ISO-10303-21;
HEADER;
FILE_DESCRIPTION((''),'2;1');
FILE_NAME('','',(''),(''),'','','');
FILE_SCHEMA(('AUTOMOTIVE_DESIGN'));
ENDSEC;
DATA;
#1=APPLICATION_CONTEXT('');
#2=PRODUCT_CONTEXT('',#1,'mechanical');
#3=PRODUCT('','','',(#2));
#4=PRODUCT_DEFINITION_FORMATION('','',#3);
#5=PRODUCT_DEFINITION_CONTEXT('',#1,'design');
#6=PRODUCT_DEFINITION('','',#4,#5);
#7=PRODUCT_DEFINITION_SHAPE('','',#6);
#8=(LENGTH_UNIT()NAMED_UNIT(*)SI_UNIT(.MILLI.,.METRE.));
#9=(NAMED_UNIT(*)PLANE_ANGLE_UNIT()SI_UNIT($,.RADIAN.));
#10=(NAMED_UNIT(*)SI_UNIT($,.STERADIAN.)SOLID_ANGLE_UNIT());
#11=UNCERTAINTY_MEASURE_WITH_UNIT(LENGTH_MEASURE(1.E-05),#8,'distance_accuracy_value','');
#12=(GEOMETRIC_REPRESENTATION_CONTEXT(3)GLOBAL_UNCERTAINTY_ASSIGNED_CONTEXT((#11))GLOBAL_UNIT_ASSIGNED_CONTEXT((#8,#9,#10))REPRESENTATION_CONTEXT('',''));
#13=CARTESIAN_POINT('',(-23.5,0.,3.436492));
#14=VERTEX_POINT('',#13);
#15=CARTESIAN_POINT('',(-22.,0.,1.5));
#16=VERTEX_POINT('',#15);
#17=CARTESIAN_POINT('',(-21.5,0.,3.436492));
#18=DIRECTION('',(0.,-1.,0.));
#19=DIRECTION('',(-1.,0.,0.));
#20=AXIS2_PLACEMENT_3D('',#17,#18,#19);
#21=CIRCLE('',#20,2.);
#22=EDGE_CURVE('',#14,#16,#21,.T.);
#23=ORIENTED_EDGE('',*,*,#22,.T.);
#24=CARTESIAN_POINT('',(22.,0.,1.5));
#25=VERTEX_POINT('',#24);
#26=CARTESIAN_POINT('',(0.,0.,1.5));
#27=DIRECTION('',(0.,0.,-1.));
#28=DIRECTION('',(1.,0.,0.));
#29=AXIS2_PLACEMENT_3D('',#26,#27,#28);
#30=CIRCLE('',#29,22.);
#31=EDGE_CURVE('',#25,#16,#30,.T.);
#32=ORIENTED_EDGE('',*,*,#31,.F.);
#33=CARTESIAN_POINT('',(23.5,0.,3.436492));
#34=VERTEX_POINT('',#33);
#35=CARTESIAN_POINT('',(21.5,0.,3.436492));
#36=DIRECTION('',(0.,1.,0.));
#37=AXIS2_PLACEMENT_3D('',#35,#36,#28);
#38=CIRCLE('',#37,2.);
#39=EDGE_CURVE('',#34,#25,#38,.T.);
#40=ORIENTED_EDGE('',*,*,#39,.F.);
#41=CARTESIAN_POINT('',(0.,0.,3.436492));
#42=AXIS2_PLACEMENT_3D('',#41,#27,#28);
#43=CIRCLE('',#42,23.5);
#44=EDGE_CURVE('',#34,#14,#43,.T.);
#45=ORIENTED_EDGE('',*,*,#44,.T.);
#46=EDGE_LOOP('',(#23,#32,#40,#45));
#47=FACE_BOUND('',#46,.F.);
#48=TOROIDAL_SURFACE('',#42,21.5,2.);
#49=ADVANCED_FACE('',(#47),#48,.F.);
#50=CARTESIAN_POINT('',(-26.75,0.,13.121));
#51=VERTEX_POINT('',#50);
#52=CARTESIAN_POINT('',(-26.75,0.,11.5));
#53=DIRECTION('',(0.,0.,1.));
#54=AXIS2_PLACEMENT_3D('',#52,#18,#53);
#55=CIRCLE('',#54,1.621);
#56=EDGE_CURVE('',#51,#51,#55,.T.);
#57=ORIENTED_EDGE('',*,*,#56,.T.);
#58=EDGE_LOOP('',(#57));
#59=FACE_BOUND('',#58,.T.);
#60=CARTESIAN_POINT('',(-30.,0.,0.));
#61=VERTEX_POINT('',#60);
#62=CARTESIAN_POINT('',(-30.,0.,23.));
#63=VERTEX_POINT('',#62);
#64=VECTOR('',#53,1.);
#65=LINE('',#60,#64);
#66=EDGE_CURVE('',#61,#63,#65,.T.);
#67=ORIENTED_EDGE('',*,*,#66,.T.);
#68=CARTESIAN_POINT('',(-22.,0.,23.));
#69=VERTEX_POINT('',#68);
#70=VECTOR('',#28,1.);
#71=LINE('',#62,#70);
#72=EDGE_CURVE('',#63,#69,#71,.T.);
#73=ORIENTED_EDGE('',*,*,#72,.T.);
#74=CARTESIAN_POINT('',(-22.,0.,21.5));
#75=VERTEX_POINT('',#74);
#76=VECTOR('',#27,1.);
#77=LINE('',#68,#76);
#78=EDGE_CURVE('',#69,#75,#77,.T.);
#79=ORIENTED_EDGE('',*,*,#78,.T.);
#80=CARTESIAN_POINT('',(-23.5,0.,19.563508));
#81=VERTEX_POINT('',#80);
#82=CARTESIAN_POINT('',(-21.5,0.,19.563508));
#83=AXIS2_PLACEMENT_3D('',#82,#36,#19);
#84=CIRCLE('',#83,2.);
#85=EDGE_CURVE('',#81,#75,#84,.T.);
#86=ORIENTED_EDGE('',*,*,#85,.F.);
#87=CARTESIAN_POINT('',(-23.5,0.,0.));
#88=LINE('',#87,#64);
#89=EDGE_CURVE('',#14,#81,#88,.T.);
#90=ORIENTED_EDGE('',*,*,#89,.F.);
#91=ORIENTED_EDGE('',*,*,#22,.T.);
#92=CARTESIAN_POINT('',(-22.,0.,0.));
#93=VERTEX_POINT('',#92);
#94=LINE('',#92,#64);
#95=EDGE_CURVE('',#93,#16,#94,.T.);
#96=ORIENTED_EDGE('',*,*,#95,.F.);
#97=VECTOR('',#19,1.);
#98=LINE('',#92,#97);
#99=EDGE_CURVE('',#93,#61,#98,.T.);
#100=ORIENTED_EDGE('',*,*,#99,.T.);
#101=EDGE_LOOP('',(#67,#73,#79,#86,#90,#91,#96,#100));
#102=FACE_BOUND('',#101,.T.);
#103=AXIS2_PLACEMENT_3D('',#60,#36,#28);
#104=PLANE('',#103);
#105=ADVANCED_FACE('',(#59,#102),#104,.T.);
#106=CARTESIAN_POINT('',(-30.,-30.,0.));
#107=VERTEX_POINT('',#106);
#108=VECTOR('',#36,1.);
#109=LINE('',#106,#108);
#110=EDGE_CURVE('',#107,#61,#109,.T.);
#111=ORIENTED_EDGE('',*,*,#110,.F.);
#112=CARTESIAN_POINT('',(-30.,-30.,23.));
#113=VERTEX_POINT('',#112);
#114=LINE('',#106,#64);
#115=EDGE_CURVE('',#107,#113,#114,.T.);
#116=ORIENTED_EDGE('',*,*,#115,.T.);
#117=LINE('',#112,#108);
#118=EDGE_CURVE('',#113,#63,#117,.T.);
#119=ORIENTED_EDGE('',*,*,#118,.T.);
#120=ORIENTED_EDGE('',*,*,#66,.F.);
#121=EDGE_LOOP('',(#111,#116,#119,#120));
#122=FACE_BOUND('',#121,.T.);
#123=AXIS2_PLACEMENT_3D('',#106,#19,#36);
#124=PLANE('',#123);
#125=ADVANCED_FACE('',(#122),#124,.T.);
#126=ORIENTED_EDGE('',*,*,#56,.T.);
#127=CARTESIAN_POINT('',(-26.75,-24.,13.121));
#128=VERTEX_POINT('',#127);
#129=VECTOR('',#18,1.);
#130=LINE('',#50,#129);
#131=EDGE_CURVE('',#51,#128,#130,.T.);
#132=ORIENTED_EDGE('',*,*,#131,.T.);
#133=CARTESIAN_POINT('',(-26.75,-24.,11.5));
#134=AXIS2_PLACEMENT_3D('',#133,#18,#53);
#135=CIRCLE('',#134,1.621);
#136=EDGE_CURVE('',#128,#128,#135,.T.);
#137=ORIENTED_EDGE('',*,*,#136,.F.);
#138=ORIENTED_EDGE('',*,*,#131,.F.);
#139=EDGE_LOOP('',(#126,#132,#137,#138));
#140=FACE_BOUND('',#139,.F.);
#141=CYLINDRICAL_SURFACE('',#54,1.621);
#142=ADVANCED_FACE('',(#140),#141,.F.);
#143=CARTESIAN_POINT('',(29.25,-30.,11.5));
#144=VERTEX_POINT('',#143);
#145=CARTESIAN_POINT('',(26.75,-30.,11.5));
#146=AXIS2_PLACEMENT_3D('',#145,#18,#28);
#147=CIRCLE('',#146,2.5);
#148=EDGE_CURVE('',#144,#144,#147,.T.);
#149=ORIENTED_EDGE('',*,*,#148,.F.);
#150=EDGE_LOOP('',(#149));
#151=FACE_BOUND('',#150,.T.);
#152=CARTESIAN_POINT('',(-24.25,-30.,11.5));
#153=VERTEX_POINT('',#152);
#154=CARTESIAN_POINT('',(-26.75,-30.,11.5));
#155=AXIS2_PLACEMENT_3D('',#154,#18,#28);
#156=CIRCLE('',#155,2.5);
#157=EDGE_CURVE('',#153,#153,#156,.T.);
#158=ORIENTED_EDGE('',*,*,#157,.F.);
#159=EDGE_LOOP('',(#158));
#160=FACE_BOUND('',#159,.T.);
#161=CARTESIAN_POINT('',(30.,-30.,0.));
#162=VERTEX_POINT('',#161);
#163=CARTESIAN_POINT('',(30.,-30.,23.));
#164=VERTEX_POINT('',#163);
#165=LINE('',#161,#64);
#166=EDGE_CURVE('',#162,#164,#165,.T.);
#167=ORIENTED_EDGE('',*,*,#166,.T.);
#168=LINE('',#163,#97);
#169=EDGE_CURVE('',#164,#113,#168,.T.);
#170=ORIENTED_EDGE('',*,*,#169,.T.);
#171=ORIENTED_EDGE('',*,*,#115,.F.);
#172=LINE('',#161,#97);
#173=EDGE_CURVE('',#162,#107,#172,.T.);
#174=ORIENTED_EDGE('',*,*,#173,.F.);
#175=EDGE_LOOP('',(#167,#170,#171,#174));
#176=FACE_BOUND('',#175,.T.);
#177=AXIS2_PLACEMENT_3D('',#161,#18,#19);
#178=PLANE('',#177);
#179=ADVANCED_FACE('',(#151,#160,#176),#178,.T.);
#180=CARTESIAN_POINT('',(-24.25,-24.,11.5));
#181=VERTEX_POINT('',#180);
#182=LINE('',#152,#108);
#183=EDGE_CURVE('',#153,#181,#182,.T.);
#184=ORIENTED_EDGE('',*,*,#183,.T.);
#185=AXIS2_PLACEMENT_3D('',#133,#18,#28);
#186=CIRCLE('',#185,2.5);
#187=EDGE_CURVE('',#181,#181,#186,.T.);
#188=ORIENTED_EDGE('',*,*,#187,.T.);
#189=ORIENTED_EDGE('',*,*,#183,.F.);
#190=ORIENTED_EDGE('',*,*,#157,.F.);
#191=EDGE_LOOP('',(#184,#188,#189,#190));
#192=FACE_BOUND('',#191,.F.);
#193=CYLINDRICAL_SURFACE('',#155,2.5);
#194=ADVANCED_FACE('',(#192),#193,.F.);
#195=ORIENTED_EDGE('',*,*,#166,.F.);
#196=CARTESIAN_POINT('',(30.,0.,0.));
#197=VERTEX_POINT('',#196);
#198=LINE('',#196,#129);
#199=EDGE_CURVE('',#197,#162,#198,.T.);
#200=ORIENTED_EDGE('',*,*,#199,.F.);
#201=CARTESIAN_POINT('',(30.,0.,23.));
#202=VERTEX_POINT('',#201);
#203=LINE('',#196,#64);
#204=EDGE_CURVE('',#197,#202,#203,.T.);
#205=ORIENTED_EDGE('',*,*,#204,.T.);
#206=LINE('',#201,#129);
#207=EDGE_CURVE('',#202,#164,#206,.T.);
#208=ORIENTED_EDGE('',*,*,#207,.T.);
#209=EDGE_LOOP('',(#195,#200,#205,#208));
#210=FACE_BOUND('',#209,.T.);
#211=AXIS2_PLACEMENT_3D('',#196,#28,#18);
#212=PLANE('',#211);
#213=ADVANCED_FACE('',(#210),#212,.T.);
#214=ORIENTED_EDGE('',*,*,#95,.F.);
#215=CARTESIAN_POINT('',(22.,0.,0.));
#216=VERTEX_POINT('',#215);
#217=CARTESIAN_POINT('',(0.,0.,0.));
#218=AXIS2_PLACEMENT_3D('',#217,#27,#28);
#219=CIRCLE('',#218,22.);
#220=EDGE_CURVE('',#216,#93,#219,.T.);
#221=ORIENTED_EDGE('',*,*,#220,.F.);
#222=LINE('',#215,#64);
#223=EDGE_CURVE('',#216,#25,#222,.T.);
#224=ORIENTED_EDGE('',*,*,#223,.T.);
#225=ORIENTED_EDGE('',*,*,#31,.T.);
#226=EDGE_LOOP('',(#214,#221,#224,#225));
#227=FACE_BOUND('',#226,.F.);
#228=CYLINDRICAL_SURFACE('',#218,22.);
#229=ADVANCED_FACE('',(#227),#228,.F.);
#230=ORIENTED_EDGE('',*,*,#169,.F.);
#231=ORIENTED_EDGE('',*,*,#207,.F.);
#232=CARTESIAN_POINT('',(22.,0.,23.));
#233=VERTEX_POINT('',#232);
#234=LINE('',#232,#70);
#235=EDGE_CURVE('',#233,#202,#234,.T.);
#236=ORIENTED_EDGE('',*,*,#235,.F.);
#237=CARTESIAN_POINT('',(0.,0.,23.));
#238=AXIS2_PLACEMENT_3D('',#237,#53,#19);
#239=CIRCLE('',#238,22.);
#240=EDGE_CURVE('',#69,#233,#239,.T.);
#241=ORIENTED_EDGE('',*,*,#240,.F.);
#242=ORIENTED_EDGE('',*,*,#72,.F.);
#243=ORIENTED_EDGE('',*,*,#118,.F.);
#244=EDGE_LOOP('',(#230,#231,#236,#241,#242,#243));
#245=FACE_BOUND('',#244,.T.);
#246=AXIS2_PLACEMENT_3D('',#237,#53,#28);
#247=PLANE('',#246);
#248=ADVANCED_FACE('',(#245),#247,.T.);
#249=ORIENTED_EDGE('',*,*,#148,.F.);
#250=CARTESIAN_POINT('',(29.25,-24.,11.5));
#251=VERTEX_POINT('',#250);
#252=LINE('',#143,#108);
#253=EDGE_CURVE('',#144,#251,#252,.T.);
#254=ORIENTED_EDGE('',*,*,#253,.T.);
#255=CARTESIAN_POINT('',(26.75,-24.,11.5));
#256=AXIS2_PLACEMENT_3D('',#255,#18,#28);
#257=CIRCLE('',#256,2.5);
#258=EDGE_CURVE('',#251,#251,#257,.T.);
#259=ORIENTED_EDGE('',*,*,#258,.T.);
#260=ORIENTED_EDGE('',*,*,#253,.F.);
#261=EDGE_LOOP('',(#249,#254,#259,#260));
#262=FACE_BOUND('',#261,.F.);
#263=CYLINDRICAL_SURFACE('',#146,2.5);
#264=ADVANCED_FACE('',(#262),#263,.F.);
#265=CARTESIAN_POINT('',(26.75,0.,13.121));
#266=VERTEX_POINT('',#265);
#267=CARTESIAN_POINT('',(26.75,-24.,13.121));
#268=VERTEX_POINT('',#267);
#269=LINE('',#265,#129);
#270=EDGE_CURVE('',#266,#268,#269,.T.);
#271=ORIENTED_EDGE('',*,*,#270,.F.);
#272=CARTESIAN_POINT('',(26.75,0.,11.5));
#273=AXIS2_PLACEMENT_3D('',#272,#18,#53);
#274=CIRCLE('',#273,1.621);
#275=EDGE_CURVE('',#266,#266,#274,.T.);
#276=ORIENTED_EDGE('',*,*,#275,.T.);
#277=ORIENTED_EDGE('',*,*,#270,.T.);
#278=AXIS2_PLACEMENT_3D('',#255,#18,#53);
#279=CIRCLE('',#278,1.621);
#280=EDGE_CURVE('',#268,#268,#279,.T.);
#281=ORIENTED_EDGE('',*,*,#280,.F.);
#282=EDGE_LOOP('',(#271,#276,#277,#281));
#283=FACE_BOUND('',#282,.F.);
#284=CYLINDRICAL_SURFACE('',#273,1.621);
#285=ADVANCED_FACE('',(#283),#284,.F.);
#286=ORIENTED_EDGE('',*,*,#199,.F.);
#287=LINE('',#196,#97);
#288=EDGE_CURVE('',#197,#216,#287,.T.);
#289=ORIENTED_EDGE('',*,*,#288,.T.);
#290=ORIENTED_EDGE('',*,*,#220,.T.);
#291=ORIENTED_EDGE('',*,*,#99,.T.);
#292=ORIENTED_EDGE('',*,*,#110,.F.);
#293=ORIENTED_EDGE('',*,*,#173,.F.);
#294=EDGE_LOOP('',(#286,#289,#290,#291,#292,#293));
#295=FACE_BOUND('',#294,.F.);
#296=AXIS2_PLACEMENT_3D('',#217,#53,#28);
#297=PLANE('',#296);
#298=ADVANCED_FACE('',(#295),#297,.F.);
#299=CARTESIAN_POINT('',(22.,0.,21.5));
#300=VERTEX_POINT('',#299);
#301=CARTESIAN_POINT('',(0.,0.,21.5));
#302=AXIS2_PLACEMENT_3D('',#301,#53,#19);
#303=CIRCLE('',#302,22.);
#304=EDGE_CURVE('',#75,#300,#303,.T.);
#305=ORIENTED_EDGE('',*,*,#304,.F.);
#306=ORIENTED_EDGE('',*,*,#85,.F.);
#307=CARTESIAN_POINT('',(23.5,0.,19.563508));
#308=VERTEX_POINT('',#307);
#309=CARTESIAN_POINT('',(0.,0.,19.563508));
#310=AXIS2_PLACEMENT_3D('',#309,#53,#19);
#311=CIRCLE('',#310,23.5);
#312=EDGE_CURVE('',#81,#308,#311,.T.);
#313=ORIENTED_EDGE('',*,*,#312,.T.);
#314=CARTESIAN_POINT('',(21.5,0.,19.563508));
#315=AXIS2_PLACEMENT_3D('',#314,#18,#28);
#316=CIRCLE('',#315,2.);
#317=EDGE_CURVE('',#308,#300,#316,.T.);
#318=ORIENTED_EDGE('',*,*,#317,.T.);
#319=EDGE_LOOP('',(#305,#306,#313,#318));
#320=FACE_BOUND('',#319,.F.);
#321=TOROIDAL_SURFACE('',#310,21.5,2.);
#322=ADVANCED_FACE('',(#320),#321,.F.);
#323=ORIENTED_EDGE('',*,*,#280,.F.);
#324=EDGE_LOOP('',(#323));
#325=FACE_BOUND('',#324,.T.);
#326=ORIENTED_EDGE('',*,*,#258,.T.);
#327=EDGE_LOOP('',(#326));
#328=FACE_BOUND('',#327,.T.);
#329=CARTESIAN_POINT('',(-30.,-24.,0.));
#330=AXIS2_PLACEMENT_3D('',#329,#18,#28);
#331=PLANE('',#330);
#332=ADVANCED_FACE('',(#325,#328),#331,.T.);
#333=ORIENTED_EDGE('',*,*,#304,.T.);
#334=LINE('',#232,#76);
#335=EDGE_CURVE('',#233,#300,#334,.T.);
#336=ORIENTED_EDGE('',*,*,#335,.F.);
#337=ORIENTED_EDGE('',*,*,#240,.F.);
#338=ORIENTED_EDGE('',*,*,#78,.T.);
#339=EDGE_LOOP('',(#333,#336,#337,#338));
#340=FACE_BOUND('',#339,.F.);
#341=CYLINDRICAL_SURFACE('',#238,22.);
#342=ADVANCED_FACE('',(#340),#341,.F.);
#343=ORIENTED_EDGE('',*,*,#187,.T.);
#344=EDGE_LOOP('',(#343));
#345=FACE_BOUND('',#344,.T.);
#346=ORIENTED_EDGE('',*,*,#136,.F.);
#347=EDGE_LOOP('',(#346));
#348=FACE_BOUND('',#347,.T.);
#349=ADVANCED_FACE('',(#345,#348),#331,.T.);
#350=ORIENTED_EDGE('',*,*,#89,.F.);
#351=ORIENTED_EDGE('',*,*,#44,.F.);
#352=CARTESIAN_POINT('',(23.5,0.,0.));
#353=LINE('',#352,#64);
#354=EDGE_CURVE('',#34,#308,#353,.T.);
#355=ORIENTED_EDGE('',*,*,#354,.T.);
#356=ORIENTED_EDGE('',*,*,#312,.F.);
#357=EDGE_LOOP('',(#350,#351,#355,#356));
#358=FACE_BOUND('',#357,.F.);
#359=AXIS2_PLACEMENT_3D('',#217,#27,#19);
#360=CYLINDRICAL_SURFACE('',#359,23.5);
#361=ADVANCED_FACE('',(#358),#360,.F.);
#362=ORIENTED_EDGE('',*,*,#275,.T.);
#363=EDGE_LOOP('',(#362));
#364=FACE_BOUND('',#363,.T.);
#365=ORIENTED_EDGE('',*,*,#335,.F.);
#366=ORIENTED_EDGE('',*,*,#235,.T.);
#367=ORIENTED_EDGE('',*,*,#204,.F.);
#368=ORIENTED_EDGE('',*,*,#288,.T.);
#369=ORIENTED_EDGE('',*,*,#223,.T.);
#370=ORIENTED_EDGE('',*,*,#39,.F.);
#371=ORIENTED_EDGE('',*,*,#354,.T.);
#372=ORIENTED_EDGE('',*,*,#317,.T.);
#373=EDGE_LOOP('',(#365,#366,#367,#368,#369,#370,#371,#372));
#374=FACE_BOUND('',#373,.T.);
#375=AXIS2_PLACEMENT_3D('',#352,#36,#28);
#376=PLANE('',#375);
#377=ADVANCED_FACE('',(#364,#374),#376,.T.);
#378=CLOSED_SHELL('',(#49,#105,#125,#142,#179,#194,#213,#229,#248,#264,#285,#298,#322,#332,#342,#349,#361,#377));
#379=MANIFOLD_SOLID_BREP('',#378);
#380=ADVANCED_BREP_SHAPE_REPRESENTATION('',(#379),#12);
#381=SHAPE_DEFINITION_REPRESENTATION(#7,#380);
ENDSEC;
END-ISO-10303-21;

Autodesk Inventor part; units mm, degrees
ref_plane "YZ Plane" through (0, 0, 0) normal (1, 0, 0) x (0, 1, 0)
ref_plane "XZ Plane" through (0, 0, 0) normal (0, 1, 0) x (-1, 0, 0)
ref_plane "XY Plane" through (0, 0, 0) normal (0, 0, 1) x (1, 0, 0)
sketch "Sketch1" plane through (0, 0, 0) normal (0, 0, 1) x (1, 0, 0)
  arc A0 (-23.5, 0) -> (23.5, 0) centre (0, 0) ccw
  line L0 (30, 0) -> (30, -30)
  line L1 (30, -30) -> (-30, -30)
  line L2 (-30, -30) -> (-30, 0)
  line L3 (-30, 0) -> (-23.5, 0)
  line L4 (23.5, 0) -> (30, 0)
  dimension "d0" = 47
  dimension "d1" = 30
  dimension "d3" = 60
  dimension "d4" = 30
extrude "Extrusion1" add sketch "Sketch1" along normal blind 23
ref_plane "Work Plane1" through (0, 0, 23) normal (0, 0, 1) x (1, 0, 0)
sketch "Sketch2" plane through (0, 0, 23) normal (0, 0, 1) x (1, 0, 0)
  line L0 (30, 0) -> (23.5, 0) projected
  arc A0 (-23.5, 0) -> (23.5, 0) centre (0, 0) ccw
  arc A1 (-22, 0) -> (22, 0) centre (0, 0) ccw
  line L1 (-23.5, 0) -> (-22, 0)
  line L2 (22, 0) -> (23.5, 0)
  dimension "d8" = 44
extrude "Extrusion2" add sketch "Sketch2" against normal blind 1.5
fillet "Fillet1" radius 2 1 edges at (0, -23.5, 21.5)
ref_plane "Work Plane2" through (0, 0, 0) normal (0, 0, -1) x (-1, 0, 0)
sketch "Sketch3" plane through (0, 0, 0) normal (0, 0, -1) x (-1, 0, 0)
  arc A0 (-23.5, 0) -> (23.5, 0) centre (0, 0) ccw
  arc A1 (-22, 0) -> (22, 0) centre (0, 0) ccw
  line L0 (23.5, 0) -> (30, 0) projected
  line L1 (23.5, 0) -> (22, 0)
  line L2 (-22, 0) -> (-23.5, 0)
extrude "Extrusion3" add sketch "Sketch3" against normal blind 1.5
fillet "Fillet2" radius 2 1 edges at (0, -23.5, 1.5)
sketch "Sketch4" plane through (-30, 0, 23) normal (0, 1, 0) x (1, 0, 0)
  line L0 (-12, 23) -> (72, 23) projected
  line L1 (0, 23) -> (0, 0) projected
  line L2 (53.5, 19.5635) -> (53.5, 3.4365) projected
  point P0 (30, 23)
  point P1 (3.25, 11.5)
  point P2 (56.75, 11.5)
  dimension "d16" = 11.5
  dimension "d17" = 3.25
  dimension "d18" = 3.25
hole "Hole1" at (-26.75, 0, 11.5) at (26.75, 0, 11.5) direction (0, -1, 0) diameter 3.242 end through all thread size "M4x0.7" class "6H" standard "ISO Metric profile"
sketch "Sketch5" plane through (-30, -30, 0) normal (0, -1, 0) x (1, 0, 0)
  line L0 (0, 0) -> (0, 23) projected
  line L1 (0, 0) -> (60, 0) projected
  circle A0 centre (3.25, 11.5) radius 2.5
  circle A1 centre (56.75, 11.5) radius 1.621 projected
  circle A2 centre (56.75, 11.5) radius 2.5
  point P0 (30, 0)
  dimension "d26" = 3.25
  dimension "d27" = 11.5
  dimension "d28" = 5
  dimension "d29" = 5
extrude "Extrusion4" cut sketch "Sketch5" against normal blind 6
equation "\"d24\" = Thickness"
equation "\"BendRadius\" = Thickness"
equation "\"BendReliefWidth\" = Thickness"
equation "\"BendReliefDepth\" = 0.5 * Thickness"
equation "\"CornerReliefSize\" = 4 * Thickness"
equation "\"MinimumRemnant\" = 2 * Thickness"
equation "\"TransitionRadius\" = BendRadius"
equation "\"JacobiRadiusSize\" = BendRadius"
equation "\"GapSize\" = Thickness"
equation "\"Thickness\" = 0.5"
properties part number "Bearing housing top"
